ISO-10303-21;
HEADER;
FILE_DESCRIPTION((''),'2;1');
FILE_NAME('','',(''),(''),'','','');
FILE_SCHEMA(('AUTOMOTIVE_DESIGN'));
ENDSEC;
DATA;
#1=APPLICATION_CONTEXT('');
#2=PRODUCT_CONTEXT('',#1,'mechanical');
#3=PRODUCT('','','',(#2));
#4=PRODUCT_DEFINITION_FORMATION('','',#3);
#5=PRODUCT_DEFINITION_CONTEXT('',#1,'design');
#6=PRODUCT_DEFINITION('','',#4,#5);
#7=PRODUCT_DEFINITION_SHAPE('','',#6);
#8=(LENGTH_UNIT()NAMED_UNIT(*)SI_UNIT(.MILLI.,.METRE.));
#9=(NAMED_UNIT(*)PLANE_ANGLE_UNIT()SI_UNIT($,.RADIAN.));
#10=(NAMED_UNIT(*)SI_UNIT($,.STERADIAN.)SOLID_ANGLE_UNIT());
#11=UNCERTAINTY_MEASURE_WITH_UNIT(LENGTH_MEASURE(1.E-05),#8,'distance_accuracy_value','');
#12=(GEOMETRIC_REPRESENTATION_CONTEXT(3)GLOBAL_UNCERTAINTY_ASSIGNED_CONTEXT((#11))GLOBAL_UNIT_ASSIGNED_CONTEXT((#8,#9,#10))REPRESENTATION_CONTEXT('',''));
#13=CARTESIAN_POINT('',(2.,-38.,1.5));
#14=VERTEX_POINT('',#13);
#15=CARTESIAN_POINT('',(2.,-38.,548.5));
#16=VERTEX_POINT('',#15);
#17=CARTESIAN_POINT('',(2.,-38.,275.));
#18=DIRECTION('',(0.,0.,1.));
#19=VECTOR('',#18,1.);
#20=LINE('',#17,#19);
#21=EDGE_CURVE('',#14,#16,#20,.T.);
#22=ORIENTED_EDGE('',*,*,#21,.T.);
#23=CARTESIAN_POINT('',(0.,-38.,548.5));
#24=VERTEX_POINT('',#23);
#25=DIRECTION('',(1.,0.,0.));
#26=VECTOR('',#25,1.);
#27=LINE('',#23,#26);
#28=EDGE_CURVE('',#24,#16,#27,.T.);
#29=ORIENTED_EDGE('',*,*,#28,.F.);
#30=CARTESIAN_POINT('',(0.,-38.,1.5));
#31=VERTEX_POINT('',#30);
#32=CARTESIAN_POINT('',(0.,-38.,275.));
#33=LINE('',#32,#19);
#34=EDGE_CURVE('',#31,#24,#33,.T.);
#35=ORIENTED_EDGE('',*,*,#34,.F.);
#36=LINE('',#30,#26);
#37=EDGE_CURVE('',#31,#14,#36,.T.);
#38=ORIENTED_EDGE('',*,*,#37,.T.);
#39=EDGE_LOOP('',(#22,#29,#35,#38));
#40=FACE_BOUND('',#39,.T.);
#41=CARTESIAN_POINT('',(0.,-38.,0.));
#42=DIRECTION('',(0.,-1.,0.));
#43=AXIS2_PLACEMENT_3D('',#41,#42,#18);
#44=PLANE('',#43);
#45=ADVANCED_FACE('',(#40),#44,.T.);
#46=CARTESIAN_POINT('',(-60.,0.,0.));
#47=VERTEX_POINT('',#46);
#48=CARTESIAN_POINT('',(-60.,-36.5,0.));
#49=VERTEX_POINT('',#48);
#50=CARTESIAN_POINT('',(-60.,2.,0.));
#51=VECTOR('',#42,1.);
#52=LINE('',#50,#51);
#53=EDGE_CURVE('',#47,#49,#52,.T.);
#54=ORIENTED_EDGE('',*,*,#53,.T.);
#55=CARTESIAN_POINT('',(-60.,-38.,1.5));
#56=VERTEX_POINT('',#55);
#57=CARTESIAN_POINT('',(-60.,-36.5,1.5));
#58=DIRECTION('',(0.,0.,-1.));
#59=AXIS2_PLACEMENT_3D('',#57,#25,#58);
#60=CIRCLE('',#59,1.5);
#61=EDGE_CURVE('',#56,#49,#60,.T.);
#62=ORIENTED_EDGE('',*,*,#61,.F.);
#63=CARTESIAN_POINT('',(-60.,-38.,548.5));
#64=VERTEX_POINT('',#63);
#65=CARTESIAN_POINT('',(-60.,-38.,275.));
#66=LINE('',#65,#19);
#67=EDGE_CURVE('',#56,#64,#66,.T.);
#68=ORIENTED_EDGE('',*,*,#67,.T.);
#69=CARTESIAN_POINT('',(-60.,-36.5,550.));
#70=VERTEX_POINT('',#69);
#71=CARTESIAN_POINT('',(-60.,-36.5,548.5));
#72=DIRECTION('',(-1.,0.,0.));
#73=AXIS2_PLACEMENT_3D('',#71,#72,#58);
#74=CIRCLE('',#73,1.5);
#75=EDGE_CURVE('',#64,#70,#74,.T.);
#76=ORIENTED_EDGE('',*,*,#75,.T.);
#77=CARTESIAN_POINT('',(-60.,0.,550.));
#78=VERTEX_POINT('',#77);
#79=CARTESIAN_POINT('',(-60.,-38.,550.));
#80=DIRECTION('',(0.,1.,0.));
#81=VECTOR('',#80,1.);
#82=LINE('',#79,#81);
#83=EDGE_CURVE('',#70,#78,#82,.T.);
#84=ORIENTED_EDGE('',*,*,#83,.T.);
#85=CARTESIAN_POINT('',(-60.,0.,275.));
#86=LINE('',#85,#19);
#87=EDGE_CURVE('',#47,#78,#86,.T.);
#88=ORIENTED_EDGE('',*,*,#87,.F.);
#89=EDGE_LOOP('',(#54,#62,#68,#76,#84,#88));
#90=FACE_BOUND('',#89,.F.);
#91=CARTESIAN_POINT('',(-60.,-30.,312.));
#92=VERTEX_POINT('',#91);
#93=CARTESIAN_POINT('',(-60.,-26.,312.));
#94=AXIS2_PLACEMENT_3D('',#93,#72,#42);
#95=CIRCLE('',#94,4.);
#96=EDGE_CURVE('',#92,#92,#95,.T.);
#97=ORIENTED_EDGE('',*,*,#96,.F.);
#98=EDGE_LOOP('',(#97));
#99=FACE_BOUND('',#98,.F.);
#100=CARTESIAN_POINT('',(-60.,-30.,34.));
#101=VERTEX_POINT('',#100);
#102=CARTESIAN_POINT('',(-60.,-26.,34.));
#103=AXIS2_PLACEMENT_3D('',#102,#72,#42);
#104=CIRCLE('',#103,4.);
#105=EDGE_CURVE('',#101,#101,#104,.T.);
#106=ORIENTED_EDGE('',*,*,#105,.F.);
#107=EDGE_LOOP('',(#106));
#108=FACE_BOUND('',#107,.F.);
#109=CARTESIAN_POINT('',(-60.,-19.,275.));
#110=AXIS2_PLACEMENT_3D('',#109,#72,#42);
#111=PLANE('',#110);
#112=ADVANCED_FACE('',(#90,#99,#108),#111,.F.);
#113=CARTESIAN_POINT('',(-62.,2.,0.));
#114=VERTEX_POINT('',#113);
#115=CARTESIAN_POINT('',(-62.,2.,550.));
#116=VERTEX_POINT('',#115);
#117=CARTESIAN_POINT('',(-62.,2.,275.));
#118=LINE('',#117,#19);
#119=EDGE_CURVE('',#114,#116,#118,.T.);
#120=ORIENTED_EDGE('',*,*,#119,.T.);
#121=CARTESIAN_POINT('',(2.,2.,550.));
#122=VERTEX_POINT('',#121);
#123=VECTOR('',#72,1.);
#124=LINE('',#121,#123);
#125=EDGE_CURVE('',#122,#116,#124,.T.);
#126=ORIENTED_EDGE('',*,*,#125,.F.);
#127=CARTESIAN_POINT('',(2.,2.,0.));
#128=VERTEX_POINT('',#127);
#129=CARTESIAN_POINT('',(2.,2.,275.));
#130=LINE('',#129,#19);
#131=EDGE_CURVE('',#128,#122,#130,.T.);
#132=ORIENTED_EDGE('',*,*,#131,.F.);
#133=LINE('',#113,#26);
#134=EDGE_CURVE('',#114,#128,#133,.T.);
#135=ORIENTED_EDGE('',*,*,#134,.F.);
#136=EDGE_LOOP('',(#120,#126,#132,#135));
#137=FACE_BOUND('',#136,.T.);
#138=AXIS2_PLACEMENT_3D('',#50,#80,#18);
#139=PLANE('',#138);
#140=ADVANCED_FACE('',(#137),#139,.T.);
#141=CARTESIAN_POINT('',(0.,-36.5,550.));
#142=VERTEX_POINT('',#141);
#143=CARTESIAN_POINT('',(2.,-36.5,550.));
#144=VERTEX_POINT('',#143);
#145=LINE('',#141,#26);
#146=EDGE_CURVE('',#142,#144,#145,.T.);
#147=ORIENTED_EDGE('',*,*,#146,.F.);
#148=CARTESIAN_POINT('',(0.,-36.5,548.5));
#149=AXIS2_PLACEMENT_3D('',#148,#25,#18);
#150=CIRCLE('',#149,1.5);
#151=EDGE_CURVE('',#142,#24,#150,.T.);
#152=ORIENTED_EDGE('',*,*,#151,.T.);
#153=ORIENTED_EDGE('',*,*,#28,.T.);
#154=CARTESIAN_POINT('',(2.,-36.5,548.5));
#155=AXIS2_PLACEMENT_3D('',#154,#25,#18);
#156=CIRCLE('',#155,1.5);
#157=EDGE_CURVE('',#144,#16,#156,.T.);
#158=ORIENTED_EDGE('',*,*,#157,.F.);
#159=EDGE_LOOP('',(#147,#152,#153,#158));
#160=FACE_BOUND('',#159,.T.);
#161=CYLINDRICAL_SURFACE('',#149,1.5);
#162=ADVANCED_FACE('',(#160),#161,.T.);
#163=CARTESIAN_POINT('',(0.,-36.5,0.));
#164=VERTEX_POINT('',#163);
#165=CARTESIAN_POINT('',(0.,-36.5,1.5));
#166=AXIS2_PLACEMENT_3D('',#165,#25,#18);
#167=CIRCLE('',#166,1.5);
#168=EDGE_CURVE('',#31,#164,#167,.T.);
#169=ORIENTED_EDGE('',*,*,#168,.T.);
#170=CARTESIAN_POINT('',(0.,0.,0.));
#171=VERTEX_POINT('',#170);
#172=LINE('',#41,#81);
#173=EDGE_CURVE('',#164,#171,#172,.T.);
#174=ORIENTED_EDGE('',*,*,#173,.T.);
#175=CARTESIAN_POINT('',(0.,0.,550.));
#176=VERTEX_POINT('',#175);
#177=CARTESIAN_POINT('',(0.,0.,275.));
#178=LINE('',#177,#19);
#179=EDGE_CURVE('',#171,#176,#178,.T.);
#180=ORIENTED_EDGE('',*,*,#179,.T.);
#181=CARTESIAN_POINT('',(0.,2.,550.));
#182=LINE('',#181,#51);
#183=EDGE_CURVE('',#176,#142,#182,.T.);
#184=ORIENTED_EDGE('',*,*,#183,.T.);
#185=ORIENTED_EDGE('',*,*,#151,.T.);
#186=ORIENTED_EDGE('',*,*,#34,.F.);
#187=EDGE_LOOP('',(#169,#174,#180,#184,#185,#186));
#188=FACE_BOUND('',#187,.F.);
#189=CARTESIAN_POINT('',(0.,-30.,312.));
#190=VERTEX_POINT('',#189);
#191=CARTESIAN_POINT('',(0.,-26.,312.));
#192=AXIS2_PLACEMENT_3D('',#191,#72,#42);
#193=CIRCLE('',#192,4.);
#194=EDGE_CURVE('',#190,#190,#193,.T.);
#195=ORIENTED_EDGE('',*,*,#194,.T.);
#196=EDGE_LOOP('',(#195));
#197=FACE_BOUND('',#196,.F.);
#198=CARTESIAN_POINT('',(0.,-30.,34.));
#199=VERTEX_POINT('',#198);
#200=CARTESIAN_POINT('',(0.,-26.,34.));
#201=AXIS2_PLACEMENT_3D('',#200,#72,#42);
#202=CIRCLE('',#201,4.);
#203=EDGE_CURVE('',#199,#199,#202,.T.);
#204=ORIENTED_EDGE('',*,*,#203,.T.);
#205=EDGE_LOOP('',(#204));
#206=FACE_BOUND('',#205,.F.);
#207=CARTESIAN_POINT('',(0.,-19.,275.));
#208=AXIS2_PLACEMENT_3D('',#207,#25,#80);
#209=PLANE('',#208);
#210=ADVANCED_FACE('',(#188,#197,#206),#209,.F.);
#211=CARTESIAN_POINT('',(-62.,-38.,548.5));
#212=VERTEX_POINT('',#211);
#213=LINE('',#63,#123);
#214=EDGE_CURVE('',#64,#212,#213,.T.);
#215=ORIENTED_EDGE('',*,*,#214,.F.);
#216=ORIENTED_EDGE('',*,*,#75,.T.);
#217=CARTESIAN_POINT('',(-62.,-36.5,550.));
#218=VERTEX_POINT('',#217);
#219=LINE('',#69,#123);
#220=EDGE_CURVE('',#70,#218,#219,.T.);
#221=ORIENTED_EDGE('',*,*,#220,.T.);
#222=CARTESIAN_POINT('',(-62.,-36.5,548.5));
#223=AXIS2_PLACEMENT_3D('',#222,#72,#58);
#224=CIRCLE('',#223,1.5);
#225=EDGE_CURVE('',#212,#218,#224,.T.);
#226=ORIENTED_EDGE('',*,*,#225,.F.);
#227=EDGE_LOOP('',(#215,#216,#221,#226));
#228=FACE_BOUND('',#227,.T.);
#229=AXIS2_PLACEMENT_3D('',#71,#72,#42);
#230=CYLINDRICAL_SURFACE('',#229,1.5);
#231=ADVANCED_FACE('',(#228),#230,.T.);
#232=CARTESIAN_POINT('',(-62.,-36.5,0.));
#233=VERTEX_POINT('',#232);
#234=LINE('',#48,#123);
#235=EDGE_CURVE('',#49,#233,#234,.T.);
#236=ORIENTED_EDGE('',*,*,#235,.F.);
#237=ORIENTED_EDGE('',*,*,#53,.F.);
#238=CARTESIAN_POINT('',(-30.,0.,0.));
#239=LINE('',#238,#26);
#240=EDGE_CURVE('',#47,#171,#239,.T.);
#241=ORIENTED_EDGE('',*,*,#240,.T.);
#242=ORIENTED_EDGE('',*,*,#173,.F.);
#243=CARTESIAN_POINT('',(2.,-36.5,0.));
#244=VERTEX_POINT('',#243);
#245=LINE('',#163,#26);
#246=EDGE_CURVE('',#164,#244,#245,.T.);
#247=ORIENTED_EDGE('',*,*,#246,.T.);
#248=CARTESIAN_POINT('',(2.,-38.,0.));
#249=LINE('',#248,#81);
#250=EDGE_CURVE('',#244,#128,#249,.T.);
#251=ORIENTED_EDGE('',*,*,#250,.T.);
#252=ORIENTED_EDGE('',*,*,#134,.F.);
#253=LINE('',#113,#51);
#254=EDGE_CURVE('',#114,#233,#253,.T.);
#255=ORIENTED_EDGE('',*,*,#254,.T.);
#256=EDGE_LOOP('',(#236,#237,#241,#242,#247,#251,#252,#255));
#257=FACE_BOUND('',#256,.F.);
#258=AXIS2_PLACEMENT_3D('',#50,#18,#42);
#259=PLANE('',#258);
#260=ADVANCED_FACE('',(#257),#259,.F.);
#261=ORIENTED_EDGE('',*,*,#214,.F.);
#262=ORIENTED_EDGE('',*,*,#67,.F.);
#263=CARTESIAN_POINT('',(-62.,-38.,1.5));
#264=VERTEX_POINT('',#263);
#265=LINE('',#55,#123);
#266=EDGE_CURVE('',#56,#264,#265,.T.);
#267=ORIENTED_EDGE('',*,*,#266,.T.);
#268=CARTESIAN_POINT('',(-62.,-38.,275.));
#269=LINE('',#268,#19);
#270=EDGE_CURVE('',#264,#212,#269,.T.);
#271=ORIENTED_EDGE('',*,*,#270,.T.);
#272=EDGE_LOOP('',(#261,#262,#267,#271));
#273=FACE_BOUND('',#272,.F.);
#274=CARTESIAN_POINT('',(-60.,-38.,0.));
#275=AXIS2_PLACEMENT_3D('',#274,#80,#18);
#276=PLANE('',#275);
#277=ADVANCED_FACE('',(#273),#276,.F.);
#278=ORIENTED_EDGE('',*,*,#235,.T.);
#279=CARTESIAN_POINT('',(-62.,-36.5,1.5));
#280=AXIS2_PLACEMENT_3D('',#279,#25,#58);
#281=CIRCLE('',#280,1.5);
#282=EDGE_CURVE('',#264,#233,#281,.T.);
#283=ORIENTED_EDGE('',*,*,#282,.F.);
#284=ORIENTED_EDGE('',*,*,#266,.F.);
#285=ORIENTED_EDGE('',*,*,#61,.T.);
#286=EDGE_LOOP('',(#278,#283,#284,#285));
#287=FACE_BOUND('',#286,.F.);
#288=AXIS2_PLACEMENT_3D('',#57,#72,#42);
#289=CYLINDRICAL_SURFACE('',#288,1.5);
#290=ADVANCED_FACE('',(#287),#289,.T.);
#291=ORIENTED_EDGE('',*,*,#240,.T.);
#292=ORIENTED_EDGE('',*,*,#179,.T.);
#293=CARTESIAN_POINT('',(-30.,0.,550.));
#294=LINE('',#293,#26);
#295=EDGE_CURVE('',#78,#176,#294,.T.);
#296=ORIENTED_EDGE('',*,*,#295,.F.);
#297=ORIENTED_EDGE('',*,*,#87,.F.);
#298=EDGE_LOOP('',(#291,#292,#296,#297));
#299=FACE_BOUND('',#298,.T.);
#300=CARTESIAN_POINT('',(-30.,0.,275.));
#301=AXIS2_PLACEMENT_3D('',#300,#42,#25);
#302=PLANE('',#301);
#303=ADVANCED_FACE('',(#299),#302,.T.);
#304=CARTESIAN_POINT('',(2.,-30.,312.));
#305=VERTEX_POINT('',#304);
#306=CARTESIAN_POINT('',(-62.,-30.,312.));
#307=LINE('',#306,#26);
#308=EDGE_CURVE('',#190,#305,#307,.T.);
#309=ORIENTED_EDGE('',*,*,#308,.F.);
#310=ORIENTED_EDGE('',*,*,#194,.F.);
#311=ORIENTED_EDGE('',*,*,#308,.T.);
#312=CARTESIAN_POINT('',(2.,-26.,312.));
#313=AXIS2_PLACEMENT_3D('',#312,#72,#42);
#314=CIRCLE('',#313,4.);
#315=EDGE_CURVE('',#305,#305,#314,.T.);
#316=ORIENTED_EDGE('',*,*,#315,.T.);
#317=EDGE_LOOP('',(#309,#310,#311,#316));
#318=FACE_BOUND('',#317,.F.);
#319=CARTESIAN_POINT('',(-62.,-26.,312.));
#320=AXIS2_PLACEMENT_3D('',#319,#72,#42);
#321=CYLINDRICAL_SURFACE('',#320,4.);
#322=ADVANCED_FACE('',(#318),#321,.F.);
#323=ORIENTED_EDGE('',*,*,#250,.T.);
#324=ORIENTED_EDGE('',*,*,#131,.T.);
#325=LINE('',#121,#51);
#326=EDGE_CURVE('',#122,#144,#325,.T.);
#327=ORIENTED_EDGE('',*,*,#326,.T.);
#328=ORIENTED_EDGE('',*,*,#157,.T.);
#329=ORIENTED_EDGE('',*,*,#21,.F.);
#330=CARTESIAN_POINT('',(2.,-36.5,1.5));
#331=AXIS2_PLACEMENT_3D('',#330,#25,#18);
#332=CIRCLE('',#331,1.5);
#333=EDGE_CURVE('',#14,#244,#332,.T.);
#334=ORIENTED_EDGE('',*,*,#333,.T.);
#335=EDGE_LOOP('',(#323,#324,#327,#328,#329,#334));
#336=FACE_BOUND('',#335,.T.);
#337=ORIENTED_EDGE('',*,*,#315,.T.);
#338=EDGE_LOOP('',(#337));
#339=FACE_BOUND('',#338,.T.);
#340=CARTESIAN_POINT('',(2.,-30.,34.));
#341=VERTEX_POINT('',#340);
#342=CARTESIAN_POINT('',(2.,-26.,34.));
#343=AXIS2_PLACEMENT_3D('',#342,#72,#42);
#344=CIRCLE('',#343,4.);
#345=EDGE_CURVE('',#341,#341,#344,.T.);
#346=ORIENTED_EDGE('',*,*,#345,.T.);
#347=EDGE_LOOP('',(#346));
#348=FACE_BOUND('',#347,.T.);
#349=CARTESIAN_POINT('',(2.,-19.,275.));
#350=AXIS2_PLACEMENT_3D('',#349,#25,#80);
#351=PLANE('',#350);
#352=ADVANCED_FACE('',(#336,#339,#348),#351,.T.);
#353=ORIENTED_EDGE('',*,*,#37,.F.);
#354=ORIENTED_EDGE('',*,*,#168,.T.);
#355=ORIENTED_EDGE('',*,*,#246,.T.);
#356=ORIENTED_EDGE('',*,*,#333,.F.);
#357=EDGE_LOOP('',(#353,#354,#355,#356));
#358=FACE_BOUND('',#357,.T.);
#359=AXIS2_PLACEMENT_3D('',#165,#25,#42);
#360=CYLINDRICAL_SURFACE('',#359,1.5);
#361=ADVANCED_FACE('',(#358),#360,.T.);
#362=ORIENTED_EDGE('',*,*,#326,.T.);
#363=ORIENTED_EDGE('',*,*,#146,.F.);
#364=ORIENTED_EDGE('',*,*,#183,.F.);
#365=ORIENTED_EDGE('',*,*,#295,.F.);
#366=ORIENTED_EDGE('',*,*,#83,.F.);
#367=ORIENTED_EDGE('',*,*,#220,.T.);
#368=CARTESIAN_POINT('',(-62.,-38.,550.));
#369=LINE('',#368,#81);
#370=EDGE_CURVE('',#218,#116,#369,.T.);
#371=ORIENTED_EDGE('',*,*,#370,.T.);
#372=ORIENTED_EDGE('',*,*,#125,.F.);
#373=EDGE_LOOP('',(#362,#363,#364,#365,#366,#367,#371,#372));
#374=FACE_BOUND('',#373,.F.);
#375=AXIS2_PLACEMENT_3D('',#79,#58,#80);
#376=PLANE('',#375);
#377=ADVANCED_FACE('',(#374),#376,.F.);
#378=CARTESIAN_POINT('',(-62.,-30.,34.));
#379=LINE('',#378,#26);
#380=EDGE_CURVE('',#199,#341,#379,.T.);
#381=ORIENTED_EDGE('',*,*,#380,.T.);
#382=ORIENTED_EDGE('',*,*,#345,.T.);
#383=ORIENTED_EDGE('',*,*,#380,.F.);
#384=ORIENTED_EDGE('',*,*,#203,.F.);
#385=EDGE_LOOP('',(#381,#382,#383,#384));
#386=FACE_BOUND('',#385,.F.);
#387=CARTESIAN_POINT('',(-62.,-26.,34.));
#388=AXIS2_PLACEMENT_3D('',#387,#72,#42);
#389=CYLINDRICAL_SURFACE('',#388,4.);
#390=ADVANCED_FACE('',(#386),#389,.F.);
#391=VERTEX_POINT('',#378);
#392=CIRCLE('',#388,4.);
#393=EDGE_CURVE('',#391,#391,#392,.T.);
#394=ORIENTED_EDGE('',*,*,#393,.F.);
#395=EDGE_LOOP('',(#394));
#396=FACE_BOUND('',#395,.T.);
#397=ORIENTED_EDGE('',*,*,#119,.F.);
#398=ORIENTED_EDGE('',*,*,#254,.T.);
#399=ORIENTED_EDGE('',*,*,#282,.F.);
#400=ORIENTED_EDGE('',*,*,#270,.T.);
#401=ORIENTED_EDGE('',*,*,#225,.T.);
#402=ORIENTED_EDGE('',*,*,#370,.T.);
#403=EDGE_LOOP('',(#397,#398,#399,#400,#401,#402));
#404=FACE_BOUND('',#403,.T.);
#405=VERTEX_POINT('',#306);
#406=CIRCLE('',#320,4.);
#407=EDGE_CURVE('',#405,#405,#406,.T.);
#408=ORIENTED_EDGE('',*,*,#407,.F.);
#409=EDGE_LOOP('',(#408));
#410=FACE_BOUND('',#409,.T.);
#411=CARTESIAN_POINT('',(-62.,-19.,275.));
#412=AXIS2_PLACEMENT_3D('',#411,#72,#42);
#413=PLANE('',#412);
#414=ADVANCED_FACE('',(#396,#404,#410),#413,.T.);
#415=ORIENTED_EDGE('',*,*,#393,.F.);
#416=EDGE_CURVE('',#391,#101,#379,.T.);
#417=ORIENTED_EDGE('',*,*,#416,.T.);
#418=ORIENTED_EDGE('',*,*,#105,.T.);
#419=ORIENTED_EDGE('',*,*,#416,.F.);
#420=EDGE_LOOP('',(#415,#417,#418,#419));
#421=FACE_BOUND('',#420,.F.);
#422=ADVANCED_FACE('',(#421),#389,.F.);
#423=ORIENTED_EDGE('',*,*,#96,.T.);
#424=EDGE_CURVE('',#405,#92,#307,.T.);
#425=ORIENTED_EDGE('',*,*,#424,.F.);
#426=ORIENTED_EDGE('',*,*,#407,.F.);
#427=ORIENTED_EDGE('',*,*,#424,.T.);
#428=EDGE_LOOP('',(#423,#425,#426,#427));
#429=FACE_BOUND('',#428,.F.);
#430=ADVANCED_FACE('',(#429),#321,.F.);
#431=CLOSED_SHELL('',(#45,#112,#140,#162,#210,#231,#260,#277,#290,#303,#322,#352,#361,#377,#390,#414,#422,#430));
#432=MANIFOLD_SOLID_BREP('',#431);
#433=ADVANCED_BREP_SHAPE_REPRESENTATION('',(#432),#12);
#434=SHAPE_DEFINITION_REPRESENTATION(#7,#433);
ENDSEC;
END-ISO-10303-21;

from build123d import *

# Parameters (mm, degrees)
F0_W     = 60
F0_H     = 550
F1_DEPTH = 2
F2_W     = 38
F2_H     = 550
F2_W_2   = 2
F3_DEPTH = 2
F4_W     = 38
F4_H     = 550
F4_W_2   = 2
F5_DEPTH = 2
F6_R     = 1.5
F7_R     = 1.5
F8_R     = 4
F9_DEPTH = 64.001


with BuildPart() as f1:
    # F0 (on Front) → F1 (new body)
    with BuildSketch(Plane.XZ):
        with Locations((-30, 275)):
            Rectangle(F0_W, F0_H)
    extrude(amount=-F1_DEPTH)

    # F2 (on face) → F3 (join)
    with BuildSketch(Plane.YZ):
        with Locations((-19, 275)):
            Rectangle(F2_W, F2_H)
        with Locations((1, 275)):
            Rectangle(F2_W_2, F2_H)
    extrude(amount=F3_DEPTH)

    # F4 (on face) → F5 (join)
    with BuildSketch(Plane(origin=(-60, 0, 0), x_dir=(0, -1, 0), z_dir=(-1, 0, 0))):
        with Locations((19, 275)):
            Rectangle(F4_W, F4_H)
        with Locations((-1, 275)):
            Rectangle(F4_W_2, F4_H)
    extrude(amount=F5_DEPTH)

    # F6
    f6_edges = [f1.edges().sort_by_distance(p)[0] for p in [
        (-61, -38, 0),
        (1, -38, 0),
    ]]
    fillet(f6_edges, radius=F6_R)

    # F7
    f7_edges = [f1.edges().sort_by_distance(p)[0] for p in [
        (-61, -38, 550),
        (1, -38, 550),
    ]]
    fillet(f7_edges, radius=F7_R)

    # F8 (on face) → F9 (cut, through all)
    with BuildSketch(Plane(origin=(-62, 0, 0), x_dir=(0, -1, 0), z_dir=(-1, 0, 0))):
        with Locations((26, 312)):
            Circle(F8_R)
        with Locations((26, 34)):
            Circle(F8_R)
    extrude(amount=-F9_DEPTH, mode=Mode.SUBTRACT)


solid = f1.part
